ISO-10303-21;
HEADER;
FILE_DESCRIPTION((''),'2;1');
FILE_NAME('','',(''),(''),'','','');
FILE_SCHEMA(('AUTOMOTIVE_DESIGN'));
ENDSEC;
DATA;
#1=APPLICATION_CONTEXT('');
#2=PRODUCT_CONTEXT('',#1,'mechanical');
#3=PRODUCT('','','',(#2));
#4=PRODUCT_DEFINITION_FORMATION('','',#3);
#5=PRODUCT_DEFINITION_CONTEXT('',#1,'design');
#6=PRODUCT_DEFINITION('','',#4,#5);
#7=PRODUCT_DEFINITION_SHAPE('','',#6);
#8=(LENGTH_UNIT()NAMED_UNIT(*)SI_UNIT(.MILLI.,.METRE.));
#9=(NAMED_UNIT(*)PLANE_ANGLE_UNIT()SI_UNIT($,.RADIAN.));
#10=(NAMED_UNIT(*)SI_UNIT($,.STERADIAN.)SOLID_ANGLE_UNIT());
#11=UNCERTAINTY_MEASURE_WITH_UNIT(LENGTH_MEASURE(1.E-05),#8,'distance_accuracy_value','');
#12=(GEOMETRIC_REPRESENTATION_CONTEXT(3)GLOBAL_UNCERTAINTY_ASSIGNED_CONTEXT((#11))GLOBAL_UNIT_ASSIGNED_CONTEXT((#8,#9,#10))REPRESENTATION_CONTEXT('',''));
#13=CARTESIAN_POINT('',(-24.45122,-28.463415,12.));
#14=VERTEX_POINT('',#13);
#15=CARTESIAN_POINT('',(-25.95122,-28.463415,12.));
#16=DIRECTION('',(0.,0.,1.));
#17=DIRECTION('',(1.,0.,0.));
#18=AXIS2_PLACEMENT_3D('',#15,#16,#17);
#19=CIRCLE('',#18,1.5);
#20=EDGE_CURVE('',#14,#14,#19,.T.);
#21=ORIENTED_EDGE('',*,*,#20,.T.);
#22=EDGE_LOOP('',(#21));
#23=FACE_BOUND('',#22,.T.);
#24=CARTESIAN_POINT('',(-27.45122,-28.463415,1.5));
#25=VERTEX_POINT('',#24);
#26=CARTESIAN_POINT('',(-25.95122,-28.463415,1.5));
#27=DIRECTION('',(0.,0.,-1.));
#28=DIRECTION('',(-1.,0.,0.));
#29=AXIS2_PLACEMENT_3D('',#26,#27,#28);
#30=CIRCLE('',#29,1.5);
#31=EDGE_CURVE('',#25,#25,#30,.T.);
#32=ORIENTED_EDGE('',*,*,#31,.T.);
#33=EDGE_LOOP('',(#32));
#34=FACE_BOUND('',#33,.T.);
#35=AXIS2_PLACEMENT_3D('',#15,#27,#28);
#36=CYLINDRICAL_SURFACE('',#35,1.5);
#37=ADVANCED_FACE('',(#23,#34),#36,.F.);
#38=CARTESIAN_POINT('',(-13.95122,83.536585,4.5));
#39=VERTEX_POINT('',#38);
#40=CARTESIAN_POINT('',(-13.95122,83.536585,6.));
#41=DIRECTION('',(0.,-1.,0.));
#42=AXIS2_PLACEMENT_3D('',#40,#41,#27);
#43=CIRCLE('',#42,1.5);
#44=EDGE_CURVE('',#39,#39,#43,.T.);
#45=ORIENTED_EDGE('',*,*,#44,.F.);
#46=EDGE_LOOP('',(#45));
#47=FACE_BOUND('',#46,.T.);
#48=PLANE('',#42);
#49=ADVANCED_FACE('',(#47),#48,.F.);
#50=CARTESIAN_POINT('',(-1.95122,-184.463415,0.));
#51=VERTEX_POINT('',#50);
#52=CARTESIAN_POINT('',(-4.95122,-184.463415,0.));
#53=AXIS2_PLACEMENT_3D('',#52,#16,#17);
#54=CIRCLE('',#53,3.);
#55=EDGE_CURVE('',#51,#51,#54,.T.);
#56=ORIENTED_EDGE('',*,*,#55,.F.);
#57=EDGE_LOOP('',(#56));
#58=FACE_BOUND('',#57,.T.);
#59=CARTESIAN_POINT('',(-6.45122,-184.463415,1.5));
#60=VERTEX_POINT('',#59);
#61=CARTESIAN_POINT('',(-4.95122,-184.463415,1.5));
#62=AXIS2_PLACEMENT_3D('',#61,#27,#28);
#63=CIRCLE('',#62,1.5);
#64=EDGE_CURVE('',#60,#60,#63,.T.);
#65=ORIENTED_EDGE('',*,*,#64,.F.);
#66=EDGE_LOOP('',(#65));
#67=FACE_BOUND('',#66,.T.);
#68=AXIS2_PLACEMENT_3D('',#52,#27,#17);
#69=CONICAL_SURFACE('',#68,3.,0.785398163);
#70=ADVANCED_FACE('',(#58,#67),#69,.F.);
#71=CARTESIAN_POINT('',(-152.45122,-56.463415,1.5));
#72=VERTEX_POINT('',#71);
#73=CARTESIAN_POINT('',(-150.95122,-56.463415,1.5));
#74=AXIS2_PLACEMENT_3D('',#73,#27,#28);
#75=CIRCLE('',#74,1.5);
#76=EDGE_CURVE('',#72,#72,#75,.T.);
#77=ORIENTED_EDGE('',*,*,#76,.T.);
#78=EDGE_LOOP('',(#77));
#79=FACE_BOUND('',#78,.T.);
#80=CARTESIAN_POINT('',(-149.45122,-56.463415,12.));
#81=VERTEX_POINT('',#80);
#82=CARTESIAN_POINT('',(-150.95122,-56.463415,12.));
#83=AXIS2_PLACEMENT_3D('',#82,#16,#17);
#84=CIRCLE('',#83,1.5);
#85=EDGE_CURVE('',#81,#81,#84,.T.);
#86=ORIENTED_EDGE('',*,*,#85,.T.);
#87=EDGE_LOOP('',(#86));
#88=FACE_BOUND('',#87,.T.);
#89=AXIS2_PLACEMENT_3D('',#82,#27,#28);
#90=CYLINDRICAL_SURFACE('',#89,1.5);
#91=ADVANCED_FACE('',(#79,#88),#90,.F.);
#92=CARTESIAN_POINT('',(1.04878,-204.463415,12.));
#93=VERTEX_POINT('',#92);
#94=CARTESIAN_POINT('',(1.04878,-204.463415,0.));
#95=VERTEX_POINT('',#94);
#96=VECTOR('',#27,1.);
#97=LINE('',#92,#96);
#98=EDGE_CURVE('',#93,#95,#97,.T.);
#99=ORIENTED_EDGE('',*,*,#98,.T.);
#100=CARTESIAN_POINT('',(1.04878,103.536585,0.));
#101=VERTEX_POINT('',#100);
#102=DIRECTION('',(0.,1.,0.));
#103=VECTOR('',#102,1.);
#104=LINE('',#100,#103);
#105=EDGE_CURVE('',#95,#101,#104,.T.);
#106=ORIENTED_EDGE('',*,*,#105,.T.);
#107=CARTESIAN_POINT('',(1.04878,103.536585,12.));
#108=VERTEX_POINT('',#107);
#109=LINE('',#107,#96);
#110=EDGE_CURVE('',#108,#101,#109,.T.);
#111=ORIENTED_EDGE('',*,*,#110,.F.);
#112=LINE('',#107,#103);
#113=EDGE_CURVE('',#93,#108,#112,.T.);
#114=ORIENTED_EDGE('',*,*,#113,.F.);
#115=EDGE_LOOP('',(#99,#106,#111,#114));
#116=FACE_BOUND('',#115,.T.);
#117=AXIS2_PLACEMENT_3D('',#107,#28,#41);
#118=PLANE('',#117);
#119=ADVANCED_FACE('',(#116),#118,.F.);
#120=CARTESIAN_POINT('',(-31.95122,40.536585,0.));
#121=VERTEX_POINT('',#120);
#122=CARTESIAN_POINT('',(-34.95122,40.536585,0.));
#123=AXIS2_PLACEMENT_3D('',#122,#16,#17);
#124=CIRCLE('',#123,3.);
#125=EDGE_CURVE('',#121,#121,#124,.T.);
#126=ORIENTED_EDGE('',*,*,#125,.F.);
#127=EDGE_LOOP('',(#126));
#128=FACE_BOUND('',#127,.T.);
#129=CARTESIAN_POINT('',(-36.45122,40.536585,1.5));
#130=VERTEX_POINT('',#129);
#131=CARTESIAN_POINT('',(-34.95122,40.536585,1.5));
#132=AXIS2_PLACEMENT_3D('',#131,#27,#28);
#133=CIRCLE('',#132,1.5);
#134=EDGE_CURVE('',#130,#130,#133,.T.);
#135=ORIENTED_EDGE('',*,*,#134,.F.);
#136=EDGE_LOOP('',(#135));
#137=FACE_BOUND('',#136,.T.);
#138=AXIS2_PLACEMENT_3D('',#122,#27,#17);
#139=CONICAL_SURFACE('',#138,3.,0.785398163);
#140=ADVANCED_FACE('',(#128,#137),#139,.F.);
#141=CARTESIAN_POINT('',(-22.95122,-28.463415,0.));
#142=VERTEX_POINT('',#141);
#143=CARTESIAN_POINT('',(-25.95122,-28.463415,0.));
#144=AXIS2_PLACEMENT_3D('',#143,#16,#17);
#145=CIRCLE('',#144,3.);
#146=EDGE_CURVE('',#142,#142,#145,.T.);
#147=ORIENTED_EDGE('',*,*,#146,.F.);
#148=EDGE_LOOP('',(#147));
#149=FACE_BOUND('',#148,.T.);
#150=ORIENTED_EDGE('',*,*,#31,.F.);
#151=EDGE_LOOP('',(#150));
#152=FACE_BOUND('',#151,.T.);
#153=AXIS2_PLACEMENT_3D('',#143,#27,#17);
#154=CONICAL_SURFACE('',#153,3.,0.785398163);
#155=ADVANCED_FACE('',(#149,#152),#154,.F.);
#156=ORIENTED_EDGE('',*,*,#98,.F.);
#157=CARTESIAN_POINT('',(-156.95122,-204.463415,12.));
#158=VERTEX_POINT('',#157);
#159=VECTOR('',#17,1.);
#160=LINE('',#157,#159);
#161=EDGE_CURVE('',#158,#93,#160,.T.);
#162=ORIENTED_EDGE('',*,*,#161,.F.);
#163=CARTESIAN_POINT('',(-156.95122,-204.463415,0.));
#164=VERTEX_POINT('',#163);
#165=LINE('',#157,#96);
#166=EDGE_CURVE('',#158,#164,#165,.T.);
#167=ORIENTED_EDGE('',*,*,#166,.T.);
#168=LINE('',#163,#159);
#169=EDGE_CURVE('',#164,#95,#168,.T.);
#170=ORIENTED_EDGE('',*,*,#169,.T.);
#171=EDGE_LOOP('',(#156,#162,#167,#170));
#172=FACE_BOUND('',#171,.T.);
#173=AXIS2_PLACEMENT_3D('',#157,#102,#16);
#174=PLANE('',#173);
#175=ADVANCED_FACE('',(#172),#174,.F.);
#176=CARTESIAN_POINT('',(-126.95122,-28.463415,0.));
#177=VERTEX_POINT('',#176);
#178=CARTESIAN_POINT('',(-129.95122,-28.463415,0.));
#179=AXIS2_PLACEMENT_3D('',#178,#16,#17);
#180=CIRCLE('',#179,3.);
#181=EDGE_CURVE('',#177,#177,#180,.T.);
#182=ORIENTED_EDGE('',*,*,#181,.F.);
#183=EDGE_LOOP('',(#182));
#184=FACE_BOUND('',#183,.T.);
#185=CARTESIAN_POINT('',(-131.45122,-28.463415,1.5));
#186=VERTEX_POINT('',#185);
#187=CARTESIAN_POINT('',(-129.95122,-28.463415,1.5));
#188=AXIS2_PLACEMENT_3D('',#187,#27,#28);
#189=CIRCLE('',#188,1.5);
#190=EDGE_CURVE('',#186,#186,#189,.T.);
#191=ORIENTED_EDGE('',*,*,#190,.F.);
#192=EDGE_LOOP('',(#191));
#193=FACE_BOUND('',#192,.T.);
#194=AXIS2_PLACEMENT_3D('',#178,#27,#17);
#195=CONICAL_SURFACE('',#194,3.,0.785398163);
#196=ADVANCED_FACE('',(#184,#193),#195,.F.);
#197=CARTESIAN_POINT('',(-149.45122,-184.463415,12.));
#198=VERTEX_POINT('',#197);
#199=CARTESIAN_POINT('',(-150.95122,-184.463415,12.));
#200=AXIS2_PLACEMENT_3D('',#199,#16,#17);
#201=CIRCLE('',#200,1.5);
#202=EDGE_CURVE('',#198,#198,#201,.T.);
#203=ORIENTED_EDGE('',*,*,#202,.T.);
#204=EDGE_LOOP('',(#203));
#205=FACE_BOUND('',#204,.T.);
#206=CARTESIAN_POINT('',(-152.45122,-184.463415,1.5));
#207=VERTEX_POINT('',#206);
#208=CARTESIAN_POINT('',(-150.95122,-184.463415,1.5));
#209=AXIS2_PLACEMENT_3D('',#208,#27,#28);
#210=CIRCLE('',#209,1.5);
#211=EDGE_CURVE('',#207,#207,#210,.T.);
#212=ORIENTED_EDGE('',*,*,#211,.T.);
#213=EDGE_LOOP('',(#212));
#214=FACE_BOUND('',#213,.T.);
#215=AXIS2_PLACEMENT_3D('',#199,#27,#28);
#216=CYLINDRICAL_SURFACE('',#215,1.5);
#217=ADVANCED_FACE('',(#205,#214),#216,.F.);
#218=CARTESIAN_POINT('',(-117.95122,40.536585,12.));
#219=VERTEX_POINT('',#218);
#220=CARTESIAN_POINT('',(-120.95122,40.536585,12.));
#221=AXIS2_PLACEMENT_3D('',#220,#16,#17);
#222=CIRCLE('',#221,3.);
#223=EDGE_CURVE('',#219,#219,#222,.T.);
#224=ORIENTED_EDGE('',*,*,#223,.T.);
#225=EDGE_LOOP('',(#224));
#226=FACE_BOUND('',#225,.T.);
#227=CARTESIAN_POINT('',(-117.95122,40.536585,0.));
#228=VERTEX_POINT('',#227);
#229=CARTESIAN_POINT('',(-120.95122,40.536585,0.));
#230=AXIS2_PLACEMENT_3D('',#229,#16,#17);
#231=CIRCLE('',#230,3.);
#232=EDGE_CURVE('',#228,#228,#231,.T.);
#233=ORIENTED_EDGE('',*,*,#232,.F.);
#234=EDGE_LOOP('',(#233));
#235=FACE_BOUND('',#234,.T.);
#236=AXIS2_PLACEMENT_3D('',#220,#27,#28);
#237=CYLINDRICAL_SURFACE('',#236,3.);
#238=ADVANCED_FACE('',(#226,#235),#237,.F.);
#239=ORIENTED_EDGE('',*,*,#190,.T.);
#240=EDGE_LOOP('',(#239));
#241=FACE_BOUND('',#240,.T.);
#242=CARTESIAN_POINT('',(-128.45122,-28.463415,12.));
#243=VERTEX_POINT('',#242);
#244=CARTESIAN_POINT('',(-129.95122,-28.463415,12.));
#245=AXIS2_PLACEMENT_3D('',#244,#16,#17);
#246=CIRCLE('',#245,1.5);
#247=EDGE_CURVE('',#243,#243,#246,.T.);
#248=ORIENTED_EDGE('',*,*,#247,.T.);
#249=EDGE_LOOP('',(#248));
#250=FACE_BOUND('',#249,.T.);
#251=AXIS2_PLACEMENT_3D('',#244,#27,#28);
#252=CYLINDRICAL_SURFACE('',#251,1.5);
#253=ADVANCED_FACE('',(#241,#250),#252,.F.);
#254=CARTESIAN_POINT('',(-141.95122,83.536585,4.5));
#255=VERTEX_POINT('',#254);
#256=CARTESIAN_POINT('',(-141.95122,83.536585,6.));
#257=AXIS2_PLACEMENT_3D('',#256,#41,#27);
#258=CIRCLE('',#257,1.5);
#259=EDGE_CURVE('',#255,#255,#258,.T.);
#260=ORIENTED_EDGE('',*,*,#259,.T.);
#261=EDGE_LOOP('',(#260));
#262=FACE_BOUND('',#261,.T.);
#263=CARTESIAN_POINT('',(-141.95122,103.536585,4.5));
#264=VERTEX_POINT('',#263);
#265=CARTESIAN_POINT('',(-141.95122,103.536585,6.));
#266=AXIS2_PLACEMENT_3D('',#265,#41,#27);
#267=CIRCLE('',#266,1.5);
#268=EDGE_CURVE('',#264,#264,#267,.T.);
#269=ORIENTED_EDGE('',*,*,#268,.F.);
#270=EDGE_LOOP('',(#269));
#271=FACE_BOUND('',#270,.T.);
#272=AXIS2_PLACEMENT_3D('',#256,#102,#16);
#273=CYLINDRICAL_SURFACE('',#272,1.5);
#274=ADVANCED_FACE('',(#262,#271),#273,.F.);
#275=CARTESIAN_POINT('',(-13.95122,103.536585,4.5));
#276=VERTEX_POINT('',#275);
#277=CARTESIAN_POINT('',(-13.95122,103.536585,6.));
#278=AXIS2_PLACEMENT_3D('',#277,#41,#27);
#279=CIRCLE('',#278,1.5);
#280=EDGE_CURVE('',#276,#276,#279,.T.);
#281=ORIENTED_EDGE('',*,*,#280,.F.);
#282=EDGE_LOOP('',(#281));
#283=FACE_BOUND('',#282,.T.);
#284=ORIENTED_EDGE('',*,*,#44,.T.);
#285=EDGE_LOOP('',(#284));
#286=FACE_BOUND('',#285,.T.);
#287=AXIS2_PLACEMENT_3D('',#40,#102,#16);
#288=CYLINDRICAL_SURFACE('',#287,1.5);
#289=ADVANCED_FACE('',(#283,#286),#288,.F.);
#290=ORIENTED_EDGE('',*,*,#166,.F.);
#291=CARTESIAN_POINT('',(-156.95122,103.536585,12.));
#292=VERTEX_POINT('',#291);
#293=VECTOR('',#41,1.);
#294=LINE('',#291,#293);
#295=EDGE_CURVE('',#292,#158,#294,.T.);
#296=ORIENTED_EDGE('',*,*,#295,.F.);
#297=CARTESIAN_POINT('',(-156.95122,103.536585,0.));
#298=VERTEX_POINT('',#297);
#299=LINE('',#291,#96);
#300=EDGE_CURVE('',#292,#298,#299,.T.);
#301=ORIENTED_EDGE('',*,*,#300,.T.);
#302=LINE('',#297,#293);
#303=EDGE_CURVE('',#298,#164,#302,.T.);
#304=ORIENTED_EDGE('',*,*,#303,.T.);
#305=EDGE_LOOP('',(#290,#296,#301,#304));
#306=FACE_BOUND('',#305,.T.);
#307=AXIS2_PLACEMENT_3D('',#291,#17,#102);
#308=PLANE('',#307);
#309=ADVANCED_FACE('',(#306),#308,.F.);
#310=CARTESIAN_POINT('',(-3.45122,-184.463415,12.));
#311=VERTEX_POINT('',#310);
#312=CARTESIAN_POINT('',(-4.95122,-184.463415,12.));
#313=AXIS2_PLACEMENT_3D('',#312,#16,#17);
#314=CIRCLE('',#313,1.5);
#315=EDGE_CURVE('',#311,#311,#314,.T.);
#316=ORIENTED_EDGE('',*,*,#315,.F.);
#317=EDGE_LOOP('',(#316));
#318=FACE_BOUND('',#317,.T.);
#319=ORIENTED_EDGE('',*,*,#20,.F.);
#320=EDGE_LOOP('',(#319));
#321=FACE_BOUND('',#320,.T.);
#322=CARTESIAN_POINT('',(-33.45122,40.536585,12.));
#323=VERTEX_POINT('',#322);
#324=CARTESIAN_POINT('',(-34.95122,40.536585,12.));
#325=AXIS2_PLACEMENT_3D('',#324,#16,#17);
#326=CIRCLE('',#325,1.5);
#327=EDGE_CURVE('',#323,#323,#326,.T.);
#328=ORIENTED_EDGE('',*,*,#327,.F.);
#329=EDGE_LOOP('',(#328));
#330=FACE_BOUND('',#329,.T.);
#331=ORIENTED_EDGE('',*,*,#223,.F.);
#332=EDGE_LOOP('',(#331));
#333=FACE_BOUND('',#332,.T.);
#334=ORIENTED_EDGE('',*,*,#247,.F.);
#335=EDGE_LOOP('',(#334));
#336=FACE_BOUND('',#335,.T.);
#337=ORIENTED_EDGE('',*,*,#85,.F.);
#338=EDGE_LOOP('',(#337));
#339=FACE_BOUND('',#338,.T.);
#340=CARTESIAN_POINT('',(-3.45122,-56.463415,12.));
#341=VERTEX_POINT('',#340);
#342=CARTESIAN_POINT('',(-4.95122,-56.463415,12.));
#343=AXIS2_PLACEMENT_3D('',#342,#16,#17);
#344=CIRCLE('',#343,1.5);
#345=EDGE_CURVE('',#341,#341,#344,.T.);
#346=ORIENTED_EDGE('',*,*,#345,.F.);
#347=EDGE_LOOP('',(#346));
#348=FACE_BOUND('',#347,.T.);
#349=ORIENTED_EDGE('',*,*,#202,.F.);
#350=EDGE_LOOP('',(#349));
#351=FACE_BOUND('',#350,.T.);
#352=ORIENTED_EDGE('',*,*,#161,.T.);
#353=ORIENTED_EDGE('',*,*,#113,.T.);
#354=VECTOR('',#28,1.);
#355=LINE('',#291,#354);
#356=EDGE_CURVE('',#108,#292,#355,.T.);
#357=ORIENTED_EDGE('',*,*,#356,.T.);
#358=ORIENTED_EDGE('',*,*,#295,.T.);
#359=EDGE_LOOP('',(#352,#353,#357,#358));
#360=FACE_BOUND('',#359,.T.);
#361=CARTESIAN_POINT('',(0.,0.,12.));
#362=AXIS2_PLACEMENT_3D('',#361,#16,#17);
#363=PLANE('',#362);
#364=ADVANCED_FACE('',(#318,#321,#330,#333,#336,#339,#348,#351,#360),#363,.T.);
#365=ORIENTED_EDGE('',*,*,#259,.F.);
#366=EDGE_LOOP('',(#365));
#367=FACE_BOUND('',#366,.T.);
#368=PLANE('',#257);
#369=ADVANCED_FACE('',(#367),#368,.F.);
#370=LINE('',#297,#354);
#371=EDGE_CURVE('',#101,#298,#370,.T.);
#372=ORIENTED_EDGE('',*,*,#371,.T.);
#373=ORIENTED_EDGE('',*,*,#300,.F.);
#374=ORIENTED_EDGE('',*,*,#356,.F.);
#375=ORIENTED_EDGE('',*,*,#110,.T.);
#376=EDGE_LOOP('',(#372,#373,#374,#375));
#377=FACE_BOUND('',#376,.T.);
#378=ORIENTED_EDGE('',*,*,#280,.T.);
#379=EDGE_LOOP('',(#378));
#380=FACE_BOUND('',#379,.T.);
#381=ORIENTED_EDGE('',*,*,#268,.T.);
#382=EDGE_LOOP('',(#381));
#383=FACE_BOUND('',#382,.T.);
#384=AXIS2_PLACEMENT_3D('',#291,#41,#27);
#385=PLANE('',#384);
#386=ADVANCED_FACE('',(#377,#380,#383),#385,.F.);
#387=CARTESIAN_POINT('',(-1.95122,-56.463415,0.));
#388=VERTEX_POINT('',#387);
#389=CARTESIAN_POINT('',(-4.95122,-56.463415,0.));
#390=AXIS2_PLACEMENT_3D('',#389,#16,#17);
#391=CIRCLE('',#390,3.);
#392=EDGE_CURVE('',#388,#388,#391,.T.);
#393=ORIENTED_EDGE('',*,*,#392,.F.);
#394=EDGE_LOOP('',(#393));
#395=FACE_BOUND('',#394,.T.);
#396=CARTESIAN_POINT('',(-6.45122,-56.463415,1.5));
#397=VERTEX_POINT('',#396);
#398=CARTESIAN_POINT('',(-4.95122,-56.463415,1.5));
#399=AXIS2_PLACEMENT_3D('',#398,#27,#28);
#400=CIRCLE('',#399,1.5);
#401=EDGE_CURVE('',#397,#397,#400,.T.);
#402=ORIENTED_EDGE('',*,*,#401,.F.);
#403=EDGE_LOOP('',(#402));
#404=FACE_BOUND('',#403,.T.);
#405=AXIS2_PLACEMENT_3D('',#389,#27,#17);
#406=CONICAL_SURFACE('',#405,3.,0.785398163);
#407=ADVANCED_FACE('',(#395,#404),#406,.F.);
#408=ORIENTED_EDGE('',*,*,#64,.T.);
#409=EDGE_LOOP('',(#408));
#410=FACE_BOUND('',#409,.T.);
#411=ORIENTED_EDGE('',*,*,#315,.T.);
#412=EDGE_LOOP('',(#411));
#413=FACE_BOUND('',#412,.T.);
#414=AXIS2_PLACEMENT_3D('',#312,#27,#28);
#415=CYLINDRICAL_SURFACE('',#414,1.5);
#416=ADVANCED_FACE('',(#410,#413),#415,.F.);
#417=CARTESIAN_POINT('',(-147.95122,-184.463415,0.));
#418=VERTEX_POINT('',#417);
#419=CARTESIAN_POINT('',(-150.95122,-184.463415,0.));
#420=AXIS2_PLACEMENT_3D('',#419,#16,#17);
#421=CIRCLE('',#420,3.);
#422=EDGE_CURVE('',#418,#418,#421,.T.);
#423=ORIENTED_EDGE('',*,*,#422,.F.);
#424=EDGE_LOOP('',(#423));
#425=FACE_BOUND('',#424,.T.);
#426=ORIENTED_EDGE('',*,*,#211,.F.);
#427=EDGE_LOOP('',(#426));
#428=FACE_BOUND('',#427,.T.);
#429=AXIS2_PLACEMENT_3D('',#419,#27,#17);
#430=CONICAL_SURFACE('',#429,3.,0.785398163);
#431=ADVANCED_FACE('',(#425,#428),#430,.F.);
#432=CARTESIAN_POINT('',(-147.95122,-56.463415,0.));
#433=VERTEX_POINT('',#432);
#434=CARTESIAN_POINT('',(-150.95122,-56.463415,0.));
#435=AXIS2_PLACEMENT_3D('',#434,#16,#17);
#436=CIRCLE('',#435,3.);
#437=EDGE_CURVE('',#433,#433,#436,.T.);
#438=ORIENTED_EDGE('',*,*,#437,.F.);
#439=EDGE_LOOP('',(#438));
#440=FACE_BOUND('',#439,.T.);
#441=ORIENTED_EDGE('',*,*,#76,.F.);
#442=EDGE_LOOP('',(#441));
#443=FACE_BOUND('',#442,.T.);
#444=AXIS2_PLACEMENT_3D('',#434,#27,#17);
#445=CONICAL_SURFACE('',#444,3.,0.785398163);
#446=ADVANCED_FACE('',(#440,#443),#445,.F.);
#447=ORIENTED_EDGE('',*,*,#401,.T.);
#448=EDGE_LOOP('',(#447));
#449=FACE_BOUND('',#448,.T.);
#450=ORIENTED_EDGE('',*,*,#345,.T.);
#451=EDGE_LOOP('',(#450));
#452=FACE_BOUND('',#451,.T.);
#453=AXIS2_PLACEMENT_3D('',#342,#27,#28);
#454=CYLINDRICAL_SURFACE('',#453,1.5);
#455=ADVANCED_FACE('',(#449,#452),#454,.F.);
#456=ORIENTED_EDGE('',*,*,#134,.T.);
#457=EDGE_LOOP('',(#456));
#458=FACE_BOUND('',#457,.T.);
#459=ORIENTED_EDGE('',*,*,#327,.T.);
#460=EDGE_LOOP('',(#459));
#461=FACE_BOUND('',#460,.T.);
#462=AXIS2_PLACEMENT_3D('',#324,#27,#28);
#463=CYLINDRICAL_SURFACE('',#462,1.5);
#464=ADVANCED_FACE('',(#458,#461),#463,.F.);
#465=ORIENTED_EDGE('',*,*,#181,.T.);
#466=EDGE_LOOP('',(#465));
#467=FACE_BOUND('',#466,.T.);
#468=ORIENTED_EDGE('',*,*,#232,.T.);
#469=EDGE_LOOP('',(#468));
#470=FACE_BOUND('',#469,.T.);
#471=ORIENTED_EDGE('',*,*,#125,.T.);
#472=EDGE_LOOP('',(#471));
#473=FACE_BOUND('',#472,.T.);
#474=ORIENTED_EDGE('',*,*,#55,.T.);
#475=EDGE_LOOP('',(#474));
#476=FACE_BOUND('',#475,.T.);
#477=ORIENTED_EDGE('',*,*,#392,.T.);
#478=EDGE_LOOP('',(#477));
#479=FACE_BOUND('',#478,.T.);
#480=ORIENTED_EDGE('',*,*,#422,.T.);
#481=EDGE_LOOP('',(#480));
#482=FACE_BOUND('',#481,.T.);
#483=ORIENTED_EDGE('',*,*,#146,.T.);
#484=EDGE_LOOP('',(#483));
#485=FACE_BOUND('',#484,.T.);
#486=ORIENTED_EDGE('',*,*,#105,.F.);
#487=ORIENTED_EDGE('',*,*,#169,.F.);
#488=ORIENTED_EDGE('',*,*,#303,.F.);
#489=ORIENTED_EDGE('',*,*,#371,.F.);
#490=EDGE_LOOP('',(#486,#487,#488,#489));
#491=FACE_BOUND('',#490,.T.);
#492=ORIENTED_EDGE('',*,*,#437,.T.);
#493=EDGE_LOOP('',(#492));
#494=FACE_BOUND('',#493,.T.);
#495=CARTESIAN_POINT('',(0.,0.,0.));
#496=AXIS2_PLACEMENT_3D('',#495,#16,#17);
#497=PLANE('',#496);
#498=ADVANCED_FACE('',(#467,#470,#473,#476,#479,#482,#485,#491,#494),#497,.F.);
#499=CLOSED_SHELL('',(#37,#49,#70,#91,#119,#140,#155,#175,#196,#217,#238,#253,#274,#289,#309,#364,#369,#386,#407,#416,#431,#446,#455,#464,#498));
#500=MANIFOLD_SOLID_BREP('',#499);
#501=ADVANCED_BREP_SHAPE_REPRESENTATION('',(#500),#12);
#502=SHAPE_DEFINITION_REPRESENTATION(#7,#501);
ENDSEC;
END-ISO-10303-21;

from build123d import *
from OCP.BRepAlgoAPI import BRepAlgoAPI_Cut
from OCP.TopTools import TopTools_ListOfShape

# Parameters (mm, degrees)
SKETCH1_W           = 158
SKETCH1_H           = 308
SKETCH1_R           = 1.5
SKETCH1_R_2         = 3
BOSS_EXTRUDE1_DEPTH = 12
SKETCH5_R           = 3
CUT_EXTRUDE4_DEPTH  = 3
CUT_EXTRUDE4_TAPER  = 45
CUT_EXTRUDE5_START  = 103.536585
SKETCH6_R           = 1.5
CUT_EXTRUDE5_DEPTH  = 20


with BuildPart() as part:
    # Sketch1 → Boss-Extrude1 (new body)
    with BuildSketch(Plane.XY):
        with Locations((-77.951219512, -50.463414634)):
            Rectangle(SKETCH1_W, SKETCH1_H)
        with Locations((-129.951219512, -28.463414634)):
            Circle(SKETCH1_R, mode=Mode.SUBTRACT)
        with Locations((-25.951219512, -28.463414634)):
            Circle(SKETCH1_R, mode=Mode.SUBTRACT)
        with Locations((-34.951219512, 40.536585366)):
            Circle(SKETCH1_R, mode=Mode.SUBTRACT)
        with Locations((-4.951219512, -184.463414634)):
            Circle(SKETCH1_R, mode=Mode.SUBTRACT)
        with Locations((-4.951219512, -56.463414634)):
            Circle(SKETCH1_R, mode=Mode.SUBTRACT)
        with Locations((-150.951219512, -184.463414634)):
            Circle(SKETCH1_R, mode=Mode.SUBTRACT)
        with Locations((-150.951219512, -56.463414634)):
            Circle(SKETCH1_R, mode=Mode.SUBTRACT)
        with Locations((-120.951219512, 40.536585366)):
            Circle(SKETCH1_R_2, mode=Mode.SUBTRACT)
    extrude(amount=BOSS_EXTRUDE1_DEPTH)

    # Sketch5 → Cut-Extrude4 (cut)
    with BuildSketch(Plane.XY):
        with Locations((-25.951219512, -28.463414634)):
            Circle(SKETCH5_R)
        with Locations((-129.951219512, -28.463414634)):
            Circle(SKETCH5_R)
        with Locations((-34.951219512, 40.536585366)):
            Circle(SKETCH5_R)
        with Locations((-4.951219512, -56.463414634)):
            Circle(SKETCH5_R)
        with Locations((-4.951219512, -184.463414634)):
            Circle(SKETCH5_R)
        with Locations((-150.951219512, -56.463414634)):
            Circle(SKETCH5_R)
        with Locations((-150.951219512, -184.463414634)):
            Circle(SKETCH5_R)
    extrude(amount=CUT_EXTRUDE4_DEPTH, taper=CUT_EXTRUDE4_TAPER, mode=Mode.SUBTRACT)


with BuildPart() as cut_extrude5_tool:
    # Sketch6 → Cut-Extrude5 (new body)
    with BuildSketch(Plane(origin=(0, 0, 0), x_dir=(1, 0, 0), z_dir=(0, 1, 0)).offset(CUT_EXTRUDE5_START)):
        with Locations(Location((-141.951219512, -6, 0), (0, 0, 90))):
            Circle(SKETCH6_R)
        with Locations(Location((-13.951219512, -6, 0), (0, 0, 90))):
            Circle(SKETCH6_R)
    extrude(amount=-CUT_EXTRUDE5_DEPTH)


with BuildPart() as part_1:
    add(part.part)

    # Cut-Extrude5: cut by cut_extrude5_tool, with a tolerance
    cut_extrude5_stock = TopTools_ListOfShape()
    cut_extrude5_stock.Append(part_1.part.wrapped)
    cut_extrude5_tools = TopTools_ListOfShape()
    cut_extrude5_tools.Append(cut_extrude5_tool.part.wrapped)
    cut_extrude5_cut = BRepAlgoAPI_Cut()
    cut_extrude5_cut.SetArguments(cut_extrude5_stock)
    cut_extrude5_cut.SetTools(cut_extrude5_tools)
    cut_extrude5_cut.SetFuzzyValue(0.00001)
    cut_extrude5_cut.Build()
    add(Compound.cast(cut_extrude5_cut.Shape()).solids(), mode=Mode.REPLACE)


solid = part_1.part
